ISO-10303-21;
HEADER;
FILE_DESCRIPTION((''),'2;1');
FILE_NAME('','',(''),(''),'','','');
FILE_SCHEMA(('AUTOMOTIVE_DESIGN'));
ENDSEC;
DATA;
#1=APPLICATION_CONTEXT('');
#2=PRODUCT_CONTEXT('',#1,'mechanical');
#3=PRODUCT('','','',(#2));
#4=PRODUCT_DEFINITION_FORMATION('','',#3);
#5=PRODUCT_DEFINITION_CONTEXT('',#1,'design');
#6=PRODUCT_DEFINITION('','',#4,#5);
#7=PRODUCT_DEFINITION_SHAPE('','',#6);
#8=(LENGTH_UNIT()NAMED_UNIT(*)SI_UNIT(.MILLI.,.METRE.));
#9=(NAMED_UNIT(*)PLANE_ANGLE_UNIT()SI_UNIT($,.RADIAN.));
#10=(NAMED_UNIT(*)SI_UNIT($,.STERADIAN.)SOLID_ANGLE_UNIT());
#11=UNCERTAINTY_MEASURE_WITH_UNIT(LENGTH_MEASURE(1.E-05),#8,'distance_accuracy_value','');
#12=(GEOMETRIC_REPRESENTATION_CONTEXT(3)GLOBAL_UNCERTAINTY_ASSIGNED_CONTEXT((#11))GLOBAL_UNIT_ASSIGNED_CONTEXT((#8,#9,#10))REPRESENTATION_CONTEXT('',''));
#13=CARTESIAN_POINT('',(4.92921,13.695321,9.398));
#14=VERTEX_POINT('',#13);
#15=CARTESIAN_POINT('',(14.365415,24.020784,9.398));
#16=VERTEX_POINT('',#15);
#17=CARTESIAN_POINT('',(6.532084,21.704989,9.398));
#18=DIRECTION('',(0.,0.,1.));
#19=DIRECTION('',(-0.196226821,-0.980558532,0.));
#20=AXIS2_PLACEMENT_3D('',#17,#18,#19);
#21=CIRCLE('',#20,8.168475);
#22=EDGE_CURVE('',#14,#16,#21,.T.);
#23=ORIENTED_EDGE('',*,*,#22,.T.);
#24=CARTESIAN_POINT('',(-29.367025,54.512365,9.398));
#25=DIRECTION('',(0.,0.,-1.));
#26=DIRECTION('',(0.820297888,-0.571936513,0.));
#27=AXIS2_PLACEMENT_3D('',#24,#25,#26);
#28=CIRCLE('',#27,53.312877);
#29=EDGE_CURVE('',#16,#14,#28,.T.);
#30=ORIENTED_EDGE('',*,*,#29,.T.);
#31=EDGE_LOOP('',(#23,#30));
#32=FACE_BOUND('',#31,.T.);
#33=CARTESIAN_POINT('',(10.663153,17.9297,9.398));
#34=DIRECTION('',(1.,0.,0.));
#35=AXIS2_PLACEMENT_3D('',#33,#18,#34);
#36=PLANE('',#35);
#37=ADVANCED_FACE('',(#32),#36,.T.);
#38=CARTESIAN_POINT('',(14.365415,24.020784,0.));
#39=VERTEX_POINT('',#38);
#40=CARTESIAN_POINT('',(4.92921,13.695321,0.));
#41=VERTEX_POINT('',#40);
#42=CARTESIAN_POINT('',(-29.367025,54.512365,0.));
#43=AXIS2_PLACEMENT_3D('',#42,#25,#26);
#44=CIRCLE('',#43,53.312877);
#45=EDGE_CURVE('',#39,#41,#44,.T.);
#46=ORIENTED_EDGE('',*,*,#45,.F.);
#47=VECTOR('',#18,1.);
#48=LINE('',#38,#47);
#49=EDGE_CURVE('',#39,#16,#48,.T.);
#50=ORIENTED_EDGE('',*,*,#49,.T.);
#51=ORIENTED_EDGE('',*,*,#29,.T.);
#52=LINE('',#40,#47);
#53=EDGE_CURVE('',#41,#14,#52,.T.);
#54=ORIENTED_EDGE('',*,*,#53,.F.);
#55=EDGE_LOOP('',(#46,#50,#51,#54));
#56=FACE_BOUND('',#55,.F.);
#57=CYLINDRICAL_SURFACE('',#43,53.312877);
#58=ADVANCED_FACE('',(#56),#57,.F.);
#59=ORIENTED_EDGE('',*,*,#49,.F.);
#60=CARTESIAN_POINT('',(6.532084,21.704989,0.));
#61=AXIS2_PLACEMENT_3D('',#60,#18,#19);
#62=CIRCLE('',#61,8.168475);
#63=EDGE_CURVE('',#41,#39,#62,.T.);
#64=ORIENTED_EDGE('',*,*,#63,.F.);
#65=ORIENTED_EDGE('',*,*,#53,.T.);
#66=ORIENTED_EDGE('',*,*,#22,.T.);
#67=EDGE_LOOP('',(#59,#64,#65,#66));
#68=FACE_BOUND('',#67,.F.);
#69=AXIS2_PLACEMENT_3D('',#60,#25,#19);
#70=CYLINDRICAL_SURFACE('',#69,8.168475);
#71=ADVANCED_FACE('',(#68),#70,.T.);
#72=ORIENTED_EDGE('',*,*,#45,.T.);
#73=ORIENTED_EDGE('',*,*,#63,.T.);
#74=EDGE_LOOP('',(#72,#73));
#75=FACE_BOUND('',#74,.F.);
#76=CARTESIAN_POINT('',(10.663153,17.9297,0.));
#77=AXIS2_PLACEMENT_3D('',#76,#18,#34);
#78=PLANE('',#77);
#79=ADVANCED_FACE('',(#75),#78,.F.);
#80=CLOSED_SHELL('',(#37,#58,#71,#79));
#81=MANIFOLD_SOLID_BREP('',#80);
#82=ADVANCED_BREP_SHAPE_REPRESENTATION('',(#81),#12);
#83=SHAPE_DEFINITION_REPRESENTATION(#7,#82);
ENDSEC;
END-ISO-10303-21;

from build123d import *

# Parameters (mm, degrees)
F1_DEPTH = 9.398


# Not quite as in the source:
# - a feature names something its author has since deleted; it is built from what else it names


with BuildPart() as f1:
    # F0 (on Top) → F1 (new body)
    with BuildSketch(Plane.XY):
        with BuildLine():
            ThreePointArc((14.3654148349, 24.020783957), (9.9874199255, 18.5472363603), (4.9292104318, 13.6953213324))
            ThreePointArc((4.9292104318, 13.6953213324), (12.5618804591, 16.1944956933), (14.3654148349, 24.020783957))
        make_face()
    extrude(amount=F1_DEPTH)


solid = f1.part
